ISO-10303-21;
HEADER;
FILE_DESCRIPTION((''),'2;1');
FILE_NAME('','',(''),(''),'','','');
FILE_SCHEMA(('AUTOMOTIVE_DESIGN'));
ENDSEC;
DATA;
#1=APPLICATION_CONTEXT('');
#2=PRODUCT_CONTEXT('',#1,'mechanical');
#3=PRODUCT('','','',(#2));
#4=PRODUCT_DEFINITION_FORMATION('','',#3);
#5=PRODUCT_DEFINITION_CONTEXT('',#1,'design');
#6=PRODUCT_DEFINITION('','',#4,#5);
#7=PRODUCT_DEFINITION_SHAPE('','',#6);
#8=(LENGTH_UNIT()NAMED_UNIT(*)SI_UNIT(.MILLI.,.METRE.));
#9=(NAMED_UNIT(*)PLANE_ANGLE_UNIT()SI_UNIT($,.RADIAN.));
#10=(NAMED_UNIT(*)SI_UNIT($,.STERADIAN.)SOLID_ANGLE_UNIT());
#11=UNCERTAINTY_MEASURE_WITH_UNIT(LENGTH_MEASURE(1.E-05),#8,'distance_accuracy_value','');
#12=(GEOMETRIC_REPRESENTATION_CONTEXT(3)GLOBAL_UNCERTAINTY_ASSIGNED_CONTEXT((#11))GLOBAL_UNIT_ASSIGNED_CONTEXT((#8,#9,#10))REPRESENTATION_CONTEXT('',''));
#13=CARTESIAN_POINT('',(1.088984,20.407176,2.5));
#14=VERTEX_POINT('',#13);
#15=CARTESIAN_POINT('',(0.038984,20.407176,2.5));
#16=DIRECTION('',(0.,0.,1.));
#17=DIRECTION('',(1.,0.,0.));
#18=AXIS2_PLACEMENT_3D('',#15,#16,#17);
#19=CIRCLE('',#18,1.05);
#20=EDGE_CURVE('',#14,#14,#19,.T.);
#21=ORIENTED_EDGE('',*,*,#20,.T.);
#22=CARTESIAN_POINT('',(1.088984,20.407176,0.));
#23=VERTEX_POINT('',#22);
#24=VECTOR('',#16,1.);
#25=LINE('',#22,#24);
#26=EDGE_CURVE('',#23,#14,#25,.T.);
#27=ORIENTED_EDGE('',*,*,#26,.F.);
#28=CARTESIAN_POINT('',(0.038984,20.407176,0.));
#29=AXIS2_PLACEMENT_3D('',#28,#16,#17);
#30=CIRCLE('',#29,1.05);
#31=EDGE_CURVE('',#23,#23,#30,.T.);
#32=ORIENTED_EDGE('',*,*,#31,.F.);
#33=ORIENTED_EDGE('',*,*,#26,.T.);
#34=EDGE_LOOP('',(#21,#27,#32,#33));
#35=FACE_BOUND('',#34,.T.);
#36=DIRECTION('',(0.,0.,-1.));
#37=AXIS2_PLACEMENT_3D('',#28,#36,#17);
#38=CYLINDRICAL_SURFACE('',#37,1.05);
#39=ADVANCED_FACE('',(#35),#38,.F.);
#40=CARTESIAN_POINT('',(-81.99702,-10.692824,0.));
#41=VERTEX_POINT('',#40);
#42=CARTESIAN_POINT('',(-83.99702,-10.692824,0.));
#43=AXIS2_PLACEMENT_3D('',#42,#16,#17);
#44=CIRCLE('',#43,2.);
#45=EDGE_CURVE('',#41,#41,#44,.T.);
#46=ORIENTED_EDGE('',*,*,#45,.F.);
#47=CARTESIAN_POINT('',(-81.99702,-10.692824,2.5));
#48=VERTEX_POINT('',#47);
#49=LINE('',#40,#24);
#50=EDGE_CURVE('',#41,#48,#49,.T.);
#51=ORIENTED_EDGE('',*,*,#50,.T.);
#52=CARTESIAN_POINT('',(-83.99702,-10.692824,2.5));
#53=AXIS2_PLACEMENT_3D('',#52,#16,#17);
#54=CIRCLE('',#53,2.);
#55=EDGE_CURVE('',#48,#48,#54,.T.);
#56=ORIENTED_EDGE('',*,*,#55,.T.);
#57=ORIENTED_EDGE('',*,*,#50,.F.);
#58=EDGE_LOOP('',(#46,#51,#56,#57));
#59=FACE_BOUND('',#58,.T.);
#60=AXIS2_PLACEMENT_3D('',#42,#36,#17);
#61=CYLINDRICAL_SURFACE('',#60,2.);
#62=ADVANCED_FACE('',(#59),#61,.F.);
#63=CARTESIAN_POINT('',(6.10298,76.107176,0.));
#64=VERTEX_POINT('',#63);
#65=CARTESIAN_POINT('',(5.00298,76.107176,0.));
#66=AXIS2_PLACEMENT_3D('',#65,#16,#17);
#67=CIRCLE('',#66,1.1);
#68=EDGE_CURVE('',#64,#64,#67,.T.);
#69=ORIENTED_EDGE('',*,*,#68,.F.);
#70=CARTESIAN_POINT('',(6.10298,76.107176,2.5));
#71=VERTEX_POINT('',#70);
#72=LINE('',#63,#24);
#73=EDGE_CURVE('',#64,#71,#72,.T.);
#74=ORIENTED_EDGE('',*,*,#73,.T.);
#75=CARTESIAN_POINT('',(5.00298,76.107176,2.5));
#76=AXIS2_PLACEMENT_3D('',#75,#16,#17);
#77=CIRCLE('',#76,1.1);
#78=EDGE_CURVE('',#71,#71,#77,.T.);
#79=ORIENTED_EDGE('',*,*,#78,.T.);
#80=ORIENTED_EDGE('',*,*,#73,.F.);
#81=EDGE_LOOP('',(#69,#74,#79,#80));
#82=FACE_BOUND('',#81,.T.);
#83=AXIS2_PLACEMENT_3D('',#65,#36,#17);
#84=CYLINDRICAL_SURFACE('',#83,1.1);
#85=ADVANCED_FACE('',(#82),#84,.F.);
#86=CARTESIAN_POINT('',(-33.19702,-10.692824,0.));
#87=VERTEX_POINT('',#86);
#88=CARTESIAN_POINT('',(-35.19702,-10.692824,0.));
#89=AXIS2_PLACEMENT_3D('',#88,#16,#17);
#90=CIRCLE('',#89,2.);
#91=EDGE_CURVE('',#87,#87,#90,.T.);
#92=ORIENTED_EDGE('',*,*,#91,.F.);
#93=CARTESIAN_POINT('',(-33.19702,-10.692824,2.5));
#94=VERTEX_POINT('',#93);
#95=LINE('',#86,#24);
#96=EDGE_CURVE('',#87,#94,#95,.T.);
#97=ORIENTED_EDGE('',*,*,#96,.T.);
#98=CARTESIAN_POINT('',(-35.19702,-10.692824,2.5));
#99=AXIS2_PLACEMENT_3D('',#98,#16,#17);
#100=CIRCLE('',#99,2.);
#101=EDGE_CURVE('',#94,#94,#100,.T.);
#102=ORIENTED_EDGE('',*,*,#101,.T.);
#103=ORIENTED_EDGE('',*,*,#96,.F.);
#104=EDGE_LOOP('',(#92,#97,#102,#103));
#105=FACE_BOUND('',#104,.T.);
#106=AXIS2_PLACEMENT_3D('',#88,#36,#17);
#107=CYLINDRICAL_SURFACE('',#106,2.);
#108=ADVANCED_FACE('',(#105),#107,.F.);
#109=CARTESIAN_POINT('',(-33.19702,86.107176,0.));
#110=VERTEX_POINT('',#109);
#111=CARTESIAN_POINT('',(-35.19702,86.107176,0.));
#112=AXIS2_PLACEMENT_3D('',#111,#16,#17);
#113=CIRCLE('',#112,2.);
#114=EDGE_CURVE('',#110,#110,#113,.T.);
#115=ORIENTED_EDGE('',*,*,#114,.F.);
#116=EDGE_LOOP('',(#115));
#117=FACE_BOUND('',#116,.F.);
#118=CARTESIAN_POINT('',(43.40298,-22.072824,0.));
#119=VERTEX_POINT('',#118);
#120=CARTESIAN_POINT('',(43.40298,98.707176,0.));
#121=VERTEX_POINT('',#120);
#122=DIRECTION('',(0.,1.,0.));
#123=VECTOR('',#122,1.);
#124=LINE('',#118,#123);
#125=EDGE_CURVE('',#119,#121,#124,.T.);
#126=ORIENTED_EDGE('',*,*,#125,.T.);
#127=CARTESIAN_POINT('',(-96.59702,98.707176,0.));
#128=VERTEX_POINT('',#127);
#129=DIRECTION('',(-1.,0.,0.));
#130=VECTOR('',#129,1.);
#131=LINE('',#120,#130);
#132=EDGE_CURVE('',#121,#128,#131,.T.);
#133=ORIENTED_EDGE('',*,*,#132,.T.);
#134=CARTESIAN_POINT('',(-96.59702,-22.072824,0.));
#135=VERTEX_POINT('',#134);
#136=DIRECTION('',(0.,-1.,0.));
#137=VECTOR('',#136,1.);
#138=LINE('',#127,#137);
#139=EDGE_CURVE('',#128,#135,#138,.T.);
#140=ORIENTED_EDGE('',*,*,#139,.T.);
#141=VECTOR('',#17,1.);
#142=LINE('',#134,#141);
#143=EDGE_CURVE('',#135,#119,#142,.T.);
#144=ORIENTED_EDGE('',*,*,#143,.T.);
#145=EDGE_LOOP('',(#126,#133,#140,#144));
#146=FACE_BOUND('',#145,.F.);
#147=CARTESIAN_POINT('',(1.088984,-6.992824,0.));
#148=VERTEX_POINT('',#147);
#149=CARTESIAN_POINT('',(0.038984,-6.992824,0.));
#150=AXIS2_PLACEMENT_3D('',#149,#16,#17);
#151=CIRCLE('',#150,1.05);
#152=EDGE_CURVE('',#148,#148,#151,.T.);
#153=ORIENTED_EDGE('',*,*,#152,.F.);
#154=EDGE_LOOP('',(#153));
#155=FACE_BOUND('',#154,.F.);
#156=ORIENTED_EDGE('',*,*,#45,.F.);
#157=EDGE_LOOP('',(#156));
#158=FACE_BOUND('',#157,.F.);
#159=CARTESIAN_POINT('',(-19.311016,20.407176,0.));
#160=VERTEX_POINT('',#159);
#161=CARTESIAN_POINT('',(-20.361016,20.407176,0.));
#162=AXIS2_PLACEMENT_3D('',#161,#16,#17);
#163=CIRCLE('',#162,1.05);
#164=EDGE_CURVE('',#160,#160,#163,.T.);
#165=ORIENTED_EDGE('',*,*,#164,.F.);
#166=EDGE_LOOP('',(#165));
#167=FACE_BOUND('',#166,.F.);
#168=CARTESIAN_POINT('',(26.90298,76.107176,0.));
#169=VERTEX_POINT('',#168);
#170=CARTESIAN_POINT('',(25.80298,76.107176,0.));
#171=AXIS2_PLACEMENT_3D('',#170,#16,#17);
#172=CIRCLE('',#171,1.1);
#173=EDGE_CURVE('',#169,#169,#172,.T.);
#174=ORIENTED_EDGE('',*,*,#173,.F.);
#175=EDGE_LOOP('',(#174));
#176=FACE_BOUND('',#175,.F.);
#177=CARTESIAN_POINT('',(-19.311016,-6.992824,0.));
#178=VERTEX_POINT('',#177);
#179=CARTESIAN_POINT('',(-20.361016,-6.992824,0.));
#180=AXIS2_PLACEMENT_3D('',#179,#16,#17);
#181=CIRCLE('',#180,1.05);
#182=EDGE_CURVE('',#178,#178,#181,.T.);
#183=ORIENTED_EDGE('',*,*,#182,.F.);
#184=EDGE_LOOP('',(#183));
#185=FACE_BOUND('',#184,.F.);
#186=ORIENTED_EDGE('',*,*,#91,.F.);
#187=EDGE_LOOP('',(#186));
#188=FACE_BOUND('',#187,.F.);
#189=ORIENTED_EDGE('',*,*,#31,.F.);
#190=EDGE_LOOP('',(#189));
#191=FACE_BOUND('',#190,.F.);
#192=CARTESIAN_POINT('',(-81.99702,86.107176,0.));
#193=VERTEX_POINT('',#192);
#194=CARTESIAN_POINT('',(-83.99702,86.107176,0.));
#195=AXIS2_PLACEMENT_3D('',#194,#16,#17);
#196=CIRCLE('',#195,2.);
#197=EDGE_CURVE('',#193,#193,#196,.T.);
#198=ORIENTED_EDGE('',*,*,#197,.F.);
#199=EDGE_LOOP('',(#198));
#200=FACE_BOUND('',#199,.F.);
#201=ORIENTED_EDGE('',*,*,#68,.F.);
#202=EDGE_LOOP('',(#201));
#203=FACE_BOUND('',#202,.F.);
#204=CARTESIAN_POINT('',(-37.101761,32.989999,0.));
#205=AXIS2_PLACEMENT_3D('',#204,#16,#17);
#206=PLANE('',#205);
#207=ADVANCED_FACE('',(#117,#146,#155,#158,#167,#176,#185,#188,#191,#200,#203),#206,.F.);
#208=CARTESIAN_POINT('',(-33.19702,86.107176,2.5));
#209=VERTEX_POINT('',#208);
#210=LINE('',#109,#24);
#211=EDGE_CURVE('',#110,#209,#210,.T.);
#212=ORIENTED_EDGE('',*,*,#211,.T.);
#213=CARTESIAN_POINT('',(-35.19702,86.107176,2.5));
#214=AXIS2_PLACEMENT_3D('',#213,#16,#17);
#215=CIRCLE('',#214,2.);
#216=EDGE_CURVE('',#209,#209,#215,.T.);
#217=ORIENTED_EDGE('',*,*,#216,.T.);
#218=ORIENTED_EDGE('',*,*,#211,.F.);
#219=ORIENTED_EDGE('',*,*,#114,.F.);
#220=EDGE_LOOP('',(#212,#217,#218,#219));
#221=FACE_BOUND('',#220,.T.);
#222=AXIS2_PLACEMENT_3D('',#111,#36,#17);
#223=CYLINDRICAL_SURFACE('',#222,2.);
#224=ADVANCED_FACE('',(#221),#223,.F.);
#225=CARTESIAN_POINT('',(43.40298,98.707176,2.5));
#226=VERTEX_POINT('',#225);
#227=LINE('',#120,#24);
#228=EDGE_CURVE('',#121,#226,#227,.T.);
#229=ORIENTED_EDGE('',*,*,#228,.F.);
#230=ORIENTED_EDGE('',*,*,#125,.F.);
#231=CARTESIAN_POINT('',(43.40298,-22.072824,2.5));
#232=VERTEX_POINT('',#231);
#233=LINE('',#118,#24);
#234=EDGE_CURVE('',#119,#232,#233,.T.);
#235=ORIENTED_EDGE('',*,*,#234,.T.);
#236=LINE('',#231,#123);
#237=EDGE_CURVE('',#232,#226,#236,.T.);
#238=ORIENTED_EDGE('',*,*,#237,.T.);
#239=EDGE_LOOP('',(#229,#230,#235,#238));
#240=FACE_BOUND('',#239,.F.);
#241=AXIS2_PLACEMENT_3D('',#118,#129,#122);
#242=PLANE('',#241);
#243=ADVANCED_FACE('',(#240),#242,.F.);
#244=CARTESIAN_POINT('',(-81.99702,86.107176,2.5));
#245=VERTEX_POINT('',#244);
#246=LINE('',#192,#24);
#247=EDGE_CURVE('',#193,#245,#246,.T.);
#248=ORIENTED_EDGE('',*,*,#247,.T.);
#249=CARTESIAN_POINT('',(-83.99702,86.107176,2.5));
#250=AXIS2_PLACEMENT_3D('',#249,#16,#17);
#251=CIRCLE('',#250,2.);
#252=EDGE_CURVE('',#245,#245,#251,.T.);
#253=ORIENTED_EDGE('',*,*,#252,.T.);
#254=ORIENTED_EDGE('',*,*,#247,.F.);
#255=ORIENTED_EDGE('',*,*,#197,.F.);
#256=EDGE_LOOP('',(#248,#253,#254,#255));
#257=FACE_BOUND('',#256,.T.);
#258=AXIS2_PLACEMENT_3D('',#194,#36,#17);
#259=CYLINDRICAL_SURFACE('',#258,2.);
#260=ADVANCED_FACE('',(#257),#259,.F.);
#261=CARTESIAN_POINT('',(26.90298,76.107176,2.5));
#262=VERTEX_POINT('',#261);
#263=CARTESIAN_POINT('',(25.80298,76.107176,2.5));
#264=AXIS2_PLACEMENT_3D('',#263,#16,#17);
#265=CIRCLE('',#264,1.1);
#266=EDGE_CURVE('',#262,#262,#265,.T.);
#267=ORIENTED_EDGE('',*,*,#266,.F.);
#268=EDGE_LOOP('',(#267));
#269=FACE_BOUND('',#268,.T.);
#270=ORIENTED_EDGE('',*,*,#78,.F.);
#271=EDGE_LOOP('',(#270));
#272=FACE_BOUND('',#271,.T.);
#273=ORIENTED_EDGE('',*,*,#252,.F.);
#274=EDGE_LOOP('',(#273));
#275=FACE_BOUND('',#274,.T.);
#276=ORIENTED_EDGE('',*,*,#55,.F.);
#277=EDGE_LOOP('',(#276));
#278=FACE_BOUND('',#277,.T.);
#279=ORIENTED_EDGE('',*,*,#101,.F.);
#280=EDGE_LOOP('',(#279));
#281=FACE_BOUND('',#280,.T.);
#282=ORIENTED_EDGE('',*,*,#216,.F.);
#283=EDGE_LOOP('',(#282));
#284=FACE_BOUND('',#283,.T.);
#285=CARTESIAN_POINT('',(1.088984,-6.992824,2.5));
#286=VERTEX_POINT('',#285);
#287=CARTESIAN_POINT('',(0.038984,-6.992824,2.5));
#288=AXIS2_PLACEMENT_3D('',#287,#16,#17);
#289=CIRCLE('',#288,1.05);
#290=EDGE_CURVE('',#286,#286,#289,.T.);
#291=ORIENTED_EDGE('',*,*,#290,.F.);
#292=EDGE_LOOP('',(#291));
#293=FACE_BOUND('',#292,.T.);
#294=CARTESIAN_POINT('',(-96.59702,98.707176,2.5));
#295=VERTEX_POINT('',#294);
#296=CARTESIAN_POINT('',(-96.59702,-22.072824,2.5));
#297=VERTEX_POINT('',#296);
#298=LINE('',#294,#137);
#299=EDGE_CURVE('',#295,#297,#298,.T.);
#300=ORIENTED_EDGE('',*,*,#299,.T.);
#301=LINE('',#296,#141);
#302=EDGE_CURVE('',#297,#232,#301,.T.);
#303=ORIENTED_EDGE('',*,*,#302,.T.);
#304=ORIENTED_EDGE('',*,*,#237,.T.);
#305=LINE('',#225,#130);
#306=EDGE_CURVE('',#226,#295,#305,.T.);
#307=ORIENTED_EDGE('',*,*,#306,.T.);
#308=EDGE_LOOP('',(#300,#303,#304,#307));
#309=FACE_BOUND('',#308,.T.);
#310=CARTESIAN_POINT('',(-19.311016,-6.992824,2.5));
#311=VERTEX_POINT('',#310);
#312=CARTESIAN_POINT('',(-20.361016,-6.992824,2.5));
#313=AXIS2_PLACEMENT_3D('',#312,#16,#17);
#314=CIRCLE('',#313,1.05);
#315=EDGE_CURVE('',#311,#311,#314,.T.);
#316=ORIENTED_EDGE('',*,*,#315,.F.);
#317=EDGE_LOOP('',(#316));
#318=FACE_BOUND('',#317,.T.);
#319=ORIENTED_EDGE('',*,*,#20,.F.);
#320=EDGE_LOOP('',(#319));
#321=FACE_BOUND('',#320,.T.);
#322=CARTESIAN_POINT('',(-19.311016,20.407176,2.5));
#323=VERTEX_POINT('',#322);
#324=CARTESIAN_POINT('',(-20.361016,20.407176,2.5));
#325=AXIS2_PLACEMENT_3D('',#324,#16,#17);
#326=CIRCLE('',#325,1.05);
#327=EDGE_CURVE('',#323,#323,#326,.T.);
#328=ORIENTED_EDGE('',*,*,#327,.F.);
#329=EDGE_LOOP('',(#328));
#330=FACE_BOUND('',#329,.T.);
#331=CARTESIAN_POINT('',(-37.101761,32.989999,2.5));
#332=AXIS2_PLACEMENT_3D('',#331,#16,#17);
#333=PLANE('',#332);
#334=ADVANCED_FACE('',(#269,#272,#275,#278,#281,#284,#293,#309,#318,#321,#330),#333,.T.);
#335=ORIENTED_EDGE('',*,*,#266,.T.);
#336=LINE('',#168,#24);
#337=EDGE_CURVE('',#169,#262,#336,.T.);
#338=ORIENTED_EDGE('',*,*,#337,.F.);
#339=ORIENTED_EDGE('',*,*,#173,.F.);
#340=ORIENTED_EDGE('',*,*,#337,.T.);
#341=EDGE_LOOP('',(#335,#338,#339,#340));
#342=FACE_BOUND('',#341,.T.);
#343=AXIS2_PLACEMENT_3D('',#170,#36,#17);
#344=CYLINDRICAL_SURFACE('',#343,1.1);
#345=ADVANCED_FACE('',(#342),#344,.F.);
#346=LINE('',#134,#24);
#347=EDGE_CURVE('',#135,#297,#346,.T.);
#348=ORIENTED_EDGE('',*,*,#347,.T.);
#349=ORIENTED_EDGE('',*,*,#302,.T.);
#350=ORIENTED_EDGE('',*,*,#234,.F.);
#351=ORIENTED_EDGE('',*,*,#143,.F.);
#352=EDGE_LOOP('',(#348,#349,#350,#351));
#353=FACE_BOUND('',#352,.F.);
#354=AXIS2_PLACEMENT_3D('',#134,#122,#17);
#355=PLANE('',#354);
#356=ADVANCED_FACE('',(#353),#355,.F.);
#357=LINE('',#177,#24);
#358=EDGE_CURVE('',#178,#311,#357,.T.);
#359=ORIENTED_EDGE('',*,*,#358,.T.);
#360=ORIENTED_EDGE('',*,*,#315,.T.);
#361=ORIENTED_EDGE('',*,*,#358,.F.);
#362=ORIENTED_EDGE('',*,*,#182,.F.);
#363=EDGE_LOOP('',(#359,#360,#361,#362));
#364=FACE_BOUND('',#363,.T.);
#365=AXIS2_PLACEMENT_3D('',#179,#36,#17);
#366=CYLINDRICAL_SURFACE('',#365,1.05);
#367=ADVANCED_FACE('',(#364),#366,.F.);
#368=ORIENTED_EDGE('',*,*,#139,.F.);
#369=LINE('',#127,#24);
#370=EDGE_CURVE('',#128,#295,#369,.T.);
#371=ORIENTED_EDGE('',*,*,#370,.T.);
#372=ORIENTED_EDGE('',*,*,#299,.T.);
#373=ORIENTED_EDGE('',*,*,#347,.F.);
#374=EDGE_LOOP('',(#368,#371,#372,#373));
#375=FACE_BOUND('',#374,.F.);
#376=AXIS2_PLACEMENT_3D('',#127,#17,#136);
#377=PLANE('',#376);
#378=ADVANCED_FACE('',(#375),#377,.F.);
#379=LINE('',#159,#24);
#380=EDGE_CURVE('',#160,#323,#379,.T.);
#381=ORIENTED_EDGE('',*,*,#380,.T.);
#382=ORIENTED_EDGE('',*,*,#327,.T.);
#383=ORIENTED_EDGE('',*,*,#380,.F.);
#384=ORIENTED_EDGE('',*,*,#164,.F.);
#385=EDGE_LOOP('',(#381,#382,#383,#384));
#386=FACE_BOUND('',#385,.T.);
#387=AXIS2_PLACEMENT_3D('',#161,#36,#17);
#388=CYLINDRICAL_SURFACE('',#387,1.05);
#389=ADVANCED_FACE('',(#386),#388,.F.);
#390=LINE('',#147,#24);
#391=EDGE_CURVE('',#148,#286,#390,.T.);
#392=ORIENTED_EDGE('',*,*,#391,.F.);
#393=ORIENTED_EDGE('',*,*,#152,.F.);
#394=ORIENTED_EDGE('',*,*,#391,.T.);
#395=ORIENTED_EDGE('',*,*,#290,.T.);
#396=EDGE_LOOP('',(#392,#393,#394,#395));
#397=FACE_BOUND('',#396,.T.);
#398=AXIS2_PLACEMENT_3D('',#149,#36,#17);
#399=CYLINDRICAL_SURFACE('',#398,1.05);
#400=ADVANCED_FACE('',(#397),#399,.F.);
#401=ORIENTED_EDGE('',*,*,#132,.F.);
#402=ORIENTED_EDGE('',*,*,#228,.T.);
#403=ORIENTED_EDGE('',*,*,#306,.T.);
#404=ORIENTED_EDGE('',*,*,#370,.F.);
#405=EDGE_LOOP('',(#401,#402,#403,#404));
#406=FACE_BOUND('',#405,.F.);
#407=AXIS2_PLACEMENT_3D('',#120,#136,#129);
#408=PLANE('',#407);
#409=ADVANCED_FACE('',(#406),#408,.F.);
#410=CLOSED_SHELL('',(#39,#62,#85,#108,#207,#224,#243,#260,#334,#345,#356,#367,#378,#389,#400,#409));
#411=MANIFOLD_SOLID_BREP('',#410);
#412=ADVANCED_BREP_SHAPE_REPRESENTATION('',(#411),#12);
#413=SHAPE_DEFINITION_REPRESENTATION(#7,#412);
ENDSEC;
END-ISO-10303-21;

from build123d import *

# Parameters (mm, degrees)
F0_W     = 26
F0_H     = 35.5
F0_W_2   = 45
F0_H_2   = 10
F0_R     = 2
F0_R_2   = 1.05
F0_W_3   = 15
F0_R_3   = 1.1
F1_DEPTH = 2.5


with BuildPart() as f1:
    # F0 (on Top) → F1 (new body)
    with BuildSketch(Plane.XY):
        Polygon((-81.5970200658, 98.7071764616), (-96.5970200658, 98.7071764616), (-96.5970200658, -22.0728235384), (43.4029799342, -22.0728235384), (43.4029799342, 98.7071764616), (-36.5970200658, 98.7071764616), (-36.5970200658, 88.7071764616), (-35.1970200658, 88.7071764616), (-32.5970200658, 88.7071764616), (-32.5970200658, 86.1071764616), (-32.5970200658, -10.6928235384), (-32.5970200658, -13.2928235384), (-35.1970200658, -13.2928235384), (-83.9970200658, -13.2928235384), (-86.5970200658, -13.2928235384), (-86.5970200658, -10.6928235384), (-86.5970200658, 86.1071764616), (-86.5970200658, 86.5071764616), (-86.5970200658, 88.7071764616), (-84.3970200658, 88.7071764616), (-83.9970200658, 88.7071764616), (-81.5970200658, 88.7071764616), align=None)
        Polygon((-23.1610157355, -9.7928235384), (-23.1610157355, 23.2071764616), (-17.1610157355, 23.2071764616), (-17.1610157355, 33.2071764616), (-2.1610157355, 33.2071764616), (-2.1610157355, 23.2071764616), (2.8389842645, 23.2071764616), (2.8389842645, -9.7928235384), align=None, mode=Mode.SUBTRACT)
        with Locations((15.4029799342, 60.9571764616)):
            Rectangle(F0_W, F0_H, mode=Mode.SUBTRACT)
        with Locations((-59.0970200658, 93.7071764616)):
            Rectangle(F0_W_2, F0_H_2)
        Polygon((-36.5970200658, 88.7071764616), (-81.5970200658, 88.7071764616), (-83.9970200658, 88.7071764616), (-84.3970200658, 88.7071764616), (-86.5970200658, 88.7071764616), (-86.5970200658, 86.5071764616), (-86.5970200658, 86.1071764616), (-86.5970200658, -10.6928235384), (-86.5970200658, -13.2928235384), (-83.9970200658, -13.2928235384), (-35.1970200658, -13.2928235384), (-32.5970200658, -13.2928235384), (-32.5970200658, -10.6928235384), (-32.5970200658, 86.1071764616), (-32.5970200658, 88.7071764616), (-35.1970200658, 88.7071764616), align=None)
        with Locations((-83.9970200658, -10.6928235384)):
            Circle(F0_R, mode=Mode.SUBTRACT)
        with Locations((-35.1970200658, -10.6928235384)):
            Circle(F0_R, mode=Mode.SUBTRACT)
        with Locations((-83.9970200658, 86.1071764616)):
            Circle(F0_R, mode=Mode.SUBTRACT)
        with Locations((-35.1970200658, 86.1071764616)):
            Circle(F0_R, mode=Mode.SUBTRACT)
        Polygon((-17.1610157355, 23.2071764616), (-23.1610157355, 23.2071764616), (-23.1610157355, -9.7928235384), (2.8389842645, -9.7928235384), (2.8389842645, 23.2071764616), (-2.1610157355, 23.2071764616), align=None)
        with Locations((-20.3610157355, -6.9928235384)):
            Circle(F0_R_2, mode=Mode.SUBTRACT)
        with Locations((0.0389842645, -6.9928235384)):
            Circle(F0_R_2, mode=Mode.SUBTRACT)
        with Locations((-20.3610157355, 20.4071764616)):
            Circle(F0_R_2, mode=Mode.SUBTRACT)
        with Locations((0.0389842645, 20.4071764616)):
            Circle(F0_R_2, mode=Mode.SUBTRACT)
        with Locations((-9.6610157355, 28.2071764616)):
            Rectangle(F0_W_3, F0_H_2)
        with Locations((15.4029799342, 60.9571764616)):
            Rectangle(F0_W, F0_H)
        with Locations((5.0029799342, 76.1071764616)):
            Circle(F0_R_3, mode=Mode.SUBTRACT)
        with Locations((25.8029799342, 76.1071764616)):
            Circle(F0_R_3, mode=Mode.SUBTRACT)
    extrude(amount=F1_DEPTH)


solid = f1.part
